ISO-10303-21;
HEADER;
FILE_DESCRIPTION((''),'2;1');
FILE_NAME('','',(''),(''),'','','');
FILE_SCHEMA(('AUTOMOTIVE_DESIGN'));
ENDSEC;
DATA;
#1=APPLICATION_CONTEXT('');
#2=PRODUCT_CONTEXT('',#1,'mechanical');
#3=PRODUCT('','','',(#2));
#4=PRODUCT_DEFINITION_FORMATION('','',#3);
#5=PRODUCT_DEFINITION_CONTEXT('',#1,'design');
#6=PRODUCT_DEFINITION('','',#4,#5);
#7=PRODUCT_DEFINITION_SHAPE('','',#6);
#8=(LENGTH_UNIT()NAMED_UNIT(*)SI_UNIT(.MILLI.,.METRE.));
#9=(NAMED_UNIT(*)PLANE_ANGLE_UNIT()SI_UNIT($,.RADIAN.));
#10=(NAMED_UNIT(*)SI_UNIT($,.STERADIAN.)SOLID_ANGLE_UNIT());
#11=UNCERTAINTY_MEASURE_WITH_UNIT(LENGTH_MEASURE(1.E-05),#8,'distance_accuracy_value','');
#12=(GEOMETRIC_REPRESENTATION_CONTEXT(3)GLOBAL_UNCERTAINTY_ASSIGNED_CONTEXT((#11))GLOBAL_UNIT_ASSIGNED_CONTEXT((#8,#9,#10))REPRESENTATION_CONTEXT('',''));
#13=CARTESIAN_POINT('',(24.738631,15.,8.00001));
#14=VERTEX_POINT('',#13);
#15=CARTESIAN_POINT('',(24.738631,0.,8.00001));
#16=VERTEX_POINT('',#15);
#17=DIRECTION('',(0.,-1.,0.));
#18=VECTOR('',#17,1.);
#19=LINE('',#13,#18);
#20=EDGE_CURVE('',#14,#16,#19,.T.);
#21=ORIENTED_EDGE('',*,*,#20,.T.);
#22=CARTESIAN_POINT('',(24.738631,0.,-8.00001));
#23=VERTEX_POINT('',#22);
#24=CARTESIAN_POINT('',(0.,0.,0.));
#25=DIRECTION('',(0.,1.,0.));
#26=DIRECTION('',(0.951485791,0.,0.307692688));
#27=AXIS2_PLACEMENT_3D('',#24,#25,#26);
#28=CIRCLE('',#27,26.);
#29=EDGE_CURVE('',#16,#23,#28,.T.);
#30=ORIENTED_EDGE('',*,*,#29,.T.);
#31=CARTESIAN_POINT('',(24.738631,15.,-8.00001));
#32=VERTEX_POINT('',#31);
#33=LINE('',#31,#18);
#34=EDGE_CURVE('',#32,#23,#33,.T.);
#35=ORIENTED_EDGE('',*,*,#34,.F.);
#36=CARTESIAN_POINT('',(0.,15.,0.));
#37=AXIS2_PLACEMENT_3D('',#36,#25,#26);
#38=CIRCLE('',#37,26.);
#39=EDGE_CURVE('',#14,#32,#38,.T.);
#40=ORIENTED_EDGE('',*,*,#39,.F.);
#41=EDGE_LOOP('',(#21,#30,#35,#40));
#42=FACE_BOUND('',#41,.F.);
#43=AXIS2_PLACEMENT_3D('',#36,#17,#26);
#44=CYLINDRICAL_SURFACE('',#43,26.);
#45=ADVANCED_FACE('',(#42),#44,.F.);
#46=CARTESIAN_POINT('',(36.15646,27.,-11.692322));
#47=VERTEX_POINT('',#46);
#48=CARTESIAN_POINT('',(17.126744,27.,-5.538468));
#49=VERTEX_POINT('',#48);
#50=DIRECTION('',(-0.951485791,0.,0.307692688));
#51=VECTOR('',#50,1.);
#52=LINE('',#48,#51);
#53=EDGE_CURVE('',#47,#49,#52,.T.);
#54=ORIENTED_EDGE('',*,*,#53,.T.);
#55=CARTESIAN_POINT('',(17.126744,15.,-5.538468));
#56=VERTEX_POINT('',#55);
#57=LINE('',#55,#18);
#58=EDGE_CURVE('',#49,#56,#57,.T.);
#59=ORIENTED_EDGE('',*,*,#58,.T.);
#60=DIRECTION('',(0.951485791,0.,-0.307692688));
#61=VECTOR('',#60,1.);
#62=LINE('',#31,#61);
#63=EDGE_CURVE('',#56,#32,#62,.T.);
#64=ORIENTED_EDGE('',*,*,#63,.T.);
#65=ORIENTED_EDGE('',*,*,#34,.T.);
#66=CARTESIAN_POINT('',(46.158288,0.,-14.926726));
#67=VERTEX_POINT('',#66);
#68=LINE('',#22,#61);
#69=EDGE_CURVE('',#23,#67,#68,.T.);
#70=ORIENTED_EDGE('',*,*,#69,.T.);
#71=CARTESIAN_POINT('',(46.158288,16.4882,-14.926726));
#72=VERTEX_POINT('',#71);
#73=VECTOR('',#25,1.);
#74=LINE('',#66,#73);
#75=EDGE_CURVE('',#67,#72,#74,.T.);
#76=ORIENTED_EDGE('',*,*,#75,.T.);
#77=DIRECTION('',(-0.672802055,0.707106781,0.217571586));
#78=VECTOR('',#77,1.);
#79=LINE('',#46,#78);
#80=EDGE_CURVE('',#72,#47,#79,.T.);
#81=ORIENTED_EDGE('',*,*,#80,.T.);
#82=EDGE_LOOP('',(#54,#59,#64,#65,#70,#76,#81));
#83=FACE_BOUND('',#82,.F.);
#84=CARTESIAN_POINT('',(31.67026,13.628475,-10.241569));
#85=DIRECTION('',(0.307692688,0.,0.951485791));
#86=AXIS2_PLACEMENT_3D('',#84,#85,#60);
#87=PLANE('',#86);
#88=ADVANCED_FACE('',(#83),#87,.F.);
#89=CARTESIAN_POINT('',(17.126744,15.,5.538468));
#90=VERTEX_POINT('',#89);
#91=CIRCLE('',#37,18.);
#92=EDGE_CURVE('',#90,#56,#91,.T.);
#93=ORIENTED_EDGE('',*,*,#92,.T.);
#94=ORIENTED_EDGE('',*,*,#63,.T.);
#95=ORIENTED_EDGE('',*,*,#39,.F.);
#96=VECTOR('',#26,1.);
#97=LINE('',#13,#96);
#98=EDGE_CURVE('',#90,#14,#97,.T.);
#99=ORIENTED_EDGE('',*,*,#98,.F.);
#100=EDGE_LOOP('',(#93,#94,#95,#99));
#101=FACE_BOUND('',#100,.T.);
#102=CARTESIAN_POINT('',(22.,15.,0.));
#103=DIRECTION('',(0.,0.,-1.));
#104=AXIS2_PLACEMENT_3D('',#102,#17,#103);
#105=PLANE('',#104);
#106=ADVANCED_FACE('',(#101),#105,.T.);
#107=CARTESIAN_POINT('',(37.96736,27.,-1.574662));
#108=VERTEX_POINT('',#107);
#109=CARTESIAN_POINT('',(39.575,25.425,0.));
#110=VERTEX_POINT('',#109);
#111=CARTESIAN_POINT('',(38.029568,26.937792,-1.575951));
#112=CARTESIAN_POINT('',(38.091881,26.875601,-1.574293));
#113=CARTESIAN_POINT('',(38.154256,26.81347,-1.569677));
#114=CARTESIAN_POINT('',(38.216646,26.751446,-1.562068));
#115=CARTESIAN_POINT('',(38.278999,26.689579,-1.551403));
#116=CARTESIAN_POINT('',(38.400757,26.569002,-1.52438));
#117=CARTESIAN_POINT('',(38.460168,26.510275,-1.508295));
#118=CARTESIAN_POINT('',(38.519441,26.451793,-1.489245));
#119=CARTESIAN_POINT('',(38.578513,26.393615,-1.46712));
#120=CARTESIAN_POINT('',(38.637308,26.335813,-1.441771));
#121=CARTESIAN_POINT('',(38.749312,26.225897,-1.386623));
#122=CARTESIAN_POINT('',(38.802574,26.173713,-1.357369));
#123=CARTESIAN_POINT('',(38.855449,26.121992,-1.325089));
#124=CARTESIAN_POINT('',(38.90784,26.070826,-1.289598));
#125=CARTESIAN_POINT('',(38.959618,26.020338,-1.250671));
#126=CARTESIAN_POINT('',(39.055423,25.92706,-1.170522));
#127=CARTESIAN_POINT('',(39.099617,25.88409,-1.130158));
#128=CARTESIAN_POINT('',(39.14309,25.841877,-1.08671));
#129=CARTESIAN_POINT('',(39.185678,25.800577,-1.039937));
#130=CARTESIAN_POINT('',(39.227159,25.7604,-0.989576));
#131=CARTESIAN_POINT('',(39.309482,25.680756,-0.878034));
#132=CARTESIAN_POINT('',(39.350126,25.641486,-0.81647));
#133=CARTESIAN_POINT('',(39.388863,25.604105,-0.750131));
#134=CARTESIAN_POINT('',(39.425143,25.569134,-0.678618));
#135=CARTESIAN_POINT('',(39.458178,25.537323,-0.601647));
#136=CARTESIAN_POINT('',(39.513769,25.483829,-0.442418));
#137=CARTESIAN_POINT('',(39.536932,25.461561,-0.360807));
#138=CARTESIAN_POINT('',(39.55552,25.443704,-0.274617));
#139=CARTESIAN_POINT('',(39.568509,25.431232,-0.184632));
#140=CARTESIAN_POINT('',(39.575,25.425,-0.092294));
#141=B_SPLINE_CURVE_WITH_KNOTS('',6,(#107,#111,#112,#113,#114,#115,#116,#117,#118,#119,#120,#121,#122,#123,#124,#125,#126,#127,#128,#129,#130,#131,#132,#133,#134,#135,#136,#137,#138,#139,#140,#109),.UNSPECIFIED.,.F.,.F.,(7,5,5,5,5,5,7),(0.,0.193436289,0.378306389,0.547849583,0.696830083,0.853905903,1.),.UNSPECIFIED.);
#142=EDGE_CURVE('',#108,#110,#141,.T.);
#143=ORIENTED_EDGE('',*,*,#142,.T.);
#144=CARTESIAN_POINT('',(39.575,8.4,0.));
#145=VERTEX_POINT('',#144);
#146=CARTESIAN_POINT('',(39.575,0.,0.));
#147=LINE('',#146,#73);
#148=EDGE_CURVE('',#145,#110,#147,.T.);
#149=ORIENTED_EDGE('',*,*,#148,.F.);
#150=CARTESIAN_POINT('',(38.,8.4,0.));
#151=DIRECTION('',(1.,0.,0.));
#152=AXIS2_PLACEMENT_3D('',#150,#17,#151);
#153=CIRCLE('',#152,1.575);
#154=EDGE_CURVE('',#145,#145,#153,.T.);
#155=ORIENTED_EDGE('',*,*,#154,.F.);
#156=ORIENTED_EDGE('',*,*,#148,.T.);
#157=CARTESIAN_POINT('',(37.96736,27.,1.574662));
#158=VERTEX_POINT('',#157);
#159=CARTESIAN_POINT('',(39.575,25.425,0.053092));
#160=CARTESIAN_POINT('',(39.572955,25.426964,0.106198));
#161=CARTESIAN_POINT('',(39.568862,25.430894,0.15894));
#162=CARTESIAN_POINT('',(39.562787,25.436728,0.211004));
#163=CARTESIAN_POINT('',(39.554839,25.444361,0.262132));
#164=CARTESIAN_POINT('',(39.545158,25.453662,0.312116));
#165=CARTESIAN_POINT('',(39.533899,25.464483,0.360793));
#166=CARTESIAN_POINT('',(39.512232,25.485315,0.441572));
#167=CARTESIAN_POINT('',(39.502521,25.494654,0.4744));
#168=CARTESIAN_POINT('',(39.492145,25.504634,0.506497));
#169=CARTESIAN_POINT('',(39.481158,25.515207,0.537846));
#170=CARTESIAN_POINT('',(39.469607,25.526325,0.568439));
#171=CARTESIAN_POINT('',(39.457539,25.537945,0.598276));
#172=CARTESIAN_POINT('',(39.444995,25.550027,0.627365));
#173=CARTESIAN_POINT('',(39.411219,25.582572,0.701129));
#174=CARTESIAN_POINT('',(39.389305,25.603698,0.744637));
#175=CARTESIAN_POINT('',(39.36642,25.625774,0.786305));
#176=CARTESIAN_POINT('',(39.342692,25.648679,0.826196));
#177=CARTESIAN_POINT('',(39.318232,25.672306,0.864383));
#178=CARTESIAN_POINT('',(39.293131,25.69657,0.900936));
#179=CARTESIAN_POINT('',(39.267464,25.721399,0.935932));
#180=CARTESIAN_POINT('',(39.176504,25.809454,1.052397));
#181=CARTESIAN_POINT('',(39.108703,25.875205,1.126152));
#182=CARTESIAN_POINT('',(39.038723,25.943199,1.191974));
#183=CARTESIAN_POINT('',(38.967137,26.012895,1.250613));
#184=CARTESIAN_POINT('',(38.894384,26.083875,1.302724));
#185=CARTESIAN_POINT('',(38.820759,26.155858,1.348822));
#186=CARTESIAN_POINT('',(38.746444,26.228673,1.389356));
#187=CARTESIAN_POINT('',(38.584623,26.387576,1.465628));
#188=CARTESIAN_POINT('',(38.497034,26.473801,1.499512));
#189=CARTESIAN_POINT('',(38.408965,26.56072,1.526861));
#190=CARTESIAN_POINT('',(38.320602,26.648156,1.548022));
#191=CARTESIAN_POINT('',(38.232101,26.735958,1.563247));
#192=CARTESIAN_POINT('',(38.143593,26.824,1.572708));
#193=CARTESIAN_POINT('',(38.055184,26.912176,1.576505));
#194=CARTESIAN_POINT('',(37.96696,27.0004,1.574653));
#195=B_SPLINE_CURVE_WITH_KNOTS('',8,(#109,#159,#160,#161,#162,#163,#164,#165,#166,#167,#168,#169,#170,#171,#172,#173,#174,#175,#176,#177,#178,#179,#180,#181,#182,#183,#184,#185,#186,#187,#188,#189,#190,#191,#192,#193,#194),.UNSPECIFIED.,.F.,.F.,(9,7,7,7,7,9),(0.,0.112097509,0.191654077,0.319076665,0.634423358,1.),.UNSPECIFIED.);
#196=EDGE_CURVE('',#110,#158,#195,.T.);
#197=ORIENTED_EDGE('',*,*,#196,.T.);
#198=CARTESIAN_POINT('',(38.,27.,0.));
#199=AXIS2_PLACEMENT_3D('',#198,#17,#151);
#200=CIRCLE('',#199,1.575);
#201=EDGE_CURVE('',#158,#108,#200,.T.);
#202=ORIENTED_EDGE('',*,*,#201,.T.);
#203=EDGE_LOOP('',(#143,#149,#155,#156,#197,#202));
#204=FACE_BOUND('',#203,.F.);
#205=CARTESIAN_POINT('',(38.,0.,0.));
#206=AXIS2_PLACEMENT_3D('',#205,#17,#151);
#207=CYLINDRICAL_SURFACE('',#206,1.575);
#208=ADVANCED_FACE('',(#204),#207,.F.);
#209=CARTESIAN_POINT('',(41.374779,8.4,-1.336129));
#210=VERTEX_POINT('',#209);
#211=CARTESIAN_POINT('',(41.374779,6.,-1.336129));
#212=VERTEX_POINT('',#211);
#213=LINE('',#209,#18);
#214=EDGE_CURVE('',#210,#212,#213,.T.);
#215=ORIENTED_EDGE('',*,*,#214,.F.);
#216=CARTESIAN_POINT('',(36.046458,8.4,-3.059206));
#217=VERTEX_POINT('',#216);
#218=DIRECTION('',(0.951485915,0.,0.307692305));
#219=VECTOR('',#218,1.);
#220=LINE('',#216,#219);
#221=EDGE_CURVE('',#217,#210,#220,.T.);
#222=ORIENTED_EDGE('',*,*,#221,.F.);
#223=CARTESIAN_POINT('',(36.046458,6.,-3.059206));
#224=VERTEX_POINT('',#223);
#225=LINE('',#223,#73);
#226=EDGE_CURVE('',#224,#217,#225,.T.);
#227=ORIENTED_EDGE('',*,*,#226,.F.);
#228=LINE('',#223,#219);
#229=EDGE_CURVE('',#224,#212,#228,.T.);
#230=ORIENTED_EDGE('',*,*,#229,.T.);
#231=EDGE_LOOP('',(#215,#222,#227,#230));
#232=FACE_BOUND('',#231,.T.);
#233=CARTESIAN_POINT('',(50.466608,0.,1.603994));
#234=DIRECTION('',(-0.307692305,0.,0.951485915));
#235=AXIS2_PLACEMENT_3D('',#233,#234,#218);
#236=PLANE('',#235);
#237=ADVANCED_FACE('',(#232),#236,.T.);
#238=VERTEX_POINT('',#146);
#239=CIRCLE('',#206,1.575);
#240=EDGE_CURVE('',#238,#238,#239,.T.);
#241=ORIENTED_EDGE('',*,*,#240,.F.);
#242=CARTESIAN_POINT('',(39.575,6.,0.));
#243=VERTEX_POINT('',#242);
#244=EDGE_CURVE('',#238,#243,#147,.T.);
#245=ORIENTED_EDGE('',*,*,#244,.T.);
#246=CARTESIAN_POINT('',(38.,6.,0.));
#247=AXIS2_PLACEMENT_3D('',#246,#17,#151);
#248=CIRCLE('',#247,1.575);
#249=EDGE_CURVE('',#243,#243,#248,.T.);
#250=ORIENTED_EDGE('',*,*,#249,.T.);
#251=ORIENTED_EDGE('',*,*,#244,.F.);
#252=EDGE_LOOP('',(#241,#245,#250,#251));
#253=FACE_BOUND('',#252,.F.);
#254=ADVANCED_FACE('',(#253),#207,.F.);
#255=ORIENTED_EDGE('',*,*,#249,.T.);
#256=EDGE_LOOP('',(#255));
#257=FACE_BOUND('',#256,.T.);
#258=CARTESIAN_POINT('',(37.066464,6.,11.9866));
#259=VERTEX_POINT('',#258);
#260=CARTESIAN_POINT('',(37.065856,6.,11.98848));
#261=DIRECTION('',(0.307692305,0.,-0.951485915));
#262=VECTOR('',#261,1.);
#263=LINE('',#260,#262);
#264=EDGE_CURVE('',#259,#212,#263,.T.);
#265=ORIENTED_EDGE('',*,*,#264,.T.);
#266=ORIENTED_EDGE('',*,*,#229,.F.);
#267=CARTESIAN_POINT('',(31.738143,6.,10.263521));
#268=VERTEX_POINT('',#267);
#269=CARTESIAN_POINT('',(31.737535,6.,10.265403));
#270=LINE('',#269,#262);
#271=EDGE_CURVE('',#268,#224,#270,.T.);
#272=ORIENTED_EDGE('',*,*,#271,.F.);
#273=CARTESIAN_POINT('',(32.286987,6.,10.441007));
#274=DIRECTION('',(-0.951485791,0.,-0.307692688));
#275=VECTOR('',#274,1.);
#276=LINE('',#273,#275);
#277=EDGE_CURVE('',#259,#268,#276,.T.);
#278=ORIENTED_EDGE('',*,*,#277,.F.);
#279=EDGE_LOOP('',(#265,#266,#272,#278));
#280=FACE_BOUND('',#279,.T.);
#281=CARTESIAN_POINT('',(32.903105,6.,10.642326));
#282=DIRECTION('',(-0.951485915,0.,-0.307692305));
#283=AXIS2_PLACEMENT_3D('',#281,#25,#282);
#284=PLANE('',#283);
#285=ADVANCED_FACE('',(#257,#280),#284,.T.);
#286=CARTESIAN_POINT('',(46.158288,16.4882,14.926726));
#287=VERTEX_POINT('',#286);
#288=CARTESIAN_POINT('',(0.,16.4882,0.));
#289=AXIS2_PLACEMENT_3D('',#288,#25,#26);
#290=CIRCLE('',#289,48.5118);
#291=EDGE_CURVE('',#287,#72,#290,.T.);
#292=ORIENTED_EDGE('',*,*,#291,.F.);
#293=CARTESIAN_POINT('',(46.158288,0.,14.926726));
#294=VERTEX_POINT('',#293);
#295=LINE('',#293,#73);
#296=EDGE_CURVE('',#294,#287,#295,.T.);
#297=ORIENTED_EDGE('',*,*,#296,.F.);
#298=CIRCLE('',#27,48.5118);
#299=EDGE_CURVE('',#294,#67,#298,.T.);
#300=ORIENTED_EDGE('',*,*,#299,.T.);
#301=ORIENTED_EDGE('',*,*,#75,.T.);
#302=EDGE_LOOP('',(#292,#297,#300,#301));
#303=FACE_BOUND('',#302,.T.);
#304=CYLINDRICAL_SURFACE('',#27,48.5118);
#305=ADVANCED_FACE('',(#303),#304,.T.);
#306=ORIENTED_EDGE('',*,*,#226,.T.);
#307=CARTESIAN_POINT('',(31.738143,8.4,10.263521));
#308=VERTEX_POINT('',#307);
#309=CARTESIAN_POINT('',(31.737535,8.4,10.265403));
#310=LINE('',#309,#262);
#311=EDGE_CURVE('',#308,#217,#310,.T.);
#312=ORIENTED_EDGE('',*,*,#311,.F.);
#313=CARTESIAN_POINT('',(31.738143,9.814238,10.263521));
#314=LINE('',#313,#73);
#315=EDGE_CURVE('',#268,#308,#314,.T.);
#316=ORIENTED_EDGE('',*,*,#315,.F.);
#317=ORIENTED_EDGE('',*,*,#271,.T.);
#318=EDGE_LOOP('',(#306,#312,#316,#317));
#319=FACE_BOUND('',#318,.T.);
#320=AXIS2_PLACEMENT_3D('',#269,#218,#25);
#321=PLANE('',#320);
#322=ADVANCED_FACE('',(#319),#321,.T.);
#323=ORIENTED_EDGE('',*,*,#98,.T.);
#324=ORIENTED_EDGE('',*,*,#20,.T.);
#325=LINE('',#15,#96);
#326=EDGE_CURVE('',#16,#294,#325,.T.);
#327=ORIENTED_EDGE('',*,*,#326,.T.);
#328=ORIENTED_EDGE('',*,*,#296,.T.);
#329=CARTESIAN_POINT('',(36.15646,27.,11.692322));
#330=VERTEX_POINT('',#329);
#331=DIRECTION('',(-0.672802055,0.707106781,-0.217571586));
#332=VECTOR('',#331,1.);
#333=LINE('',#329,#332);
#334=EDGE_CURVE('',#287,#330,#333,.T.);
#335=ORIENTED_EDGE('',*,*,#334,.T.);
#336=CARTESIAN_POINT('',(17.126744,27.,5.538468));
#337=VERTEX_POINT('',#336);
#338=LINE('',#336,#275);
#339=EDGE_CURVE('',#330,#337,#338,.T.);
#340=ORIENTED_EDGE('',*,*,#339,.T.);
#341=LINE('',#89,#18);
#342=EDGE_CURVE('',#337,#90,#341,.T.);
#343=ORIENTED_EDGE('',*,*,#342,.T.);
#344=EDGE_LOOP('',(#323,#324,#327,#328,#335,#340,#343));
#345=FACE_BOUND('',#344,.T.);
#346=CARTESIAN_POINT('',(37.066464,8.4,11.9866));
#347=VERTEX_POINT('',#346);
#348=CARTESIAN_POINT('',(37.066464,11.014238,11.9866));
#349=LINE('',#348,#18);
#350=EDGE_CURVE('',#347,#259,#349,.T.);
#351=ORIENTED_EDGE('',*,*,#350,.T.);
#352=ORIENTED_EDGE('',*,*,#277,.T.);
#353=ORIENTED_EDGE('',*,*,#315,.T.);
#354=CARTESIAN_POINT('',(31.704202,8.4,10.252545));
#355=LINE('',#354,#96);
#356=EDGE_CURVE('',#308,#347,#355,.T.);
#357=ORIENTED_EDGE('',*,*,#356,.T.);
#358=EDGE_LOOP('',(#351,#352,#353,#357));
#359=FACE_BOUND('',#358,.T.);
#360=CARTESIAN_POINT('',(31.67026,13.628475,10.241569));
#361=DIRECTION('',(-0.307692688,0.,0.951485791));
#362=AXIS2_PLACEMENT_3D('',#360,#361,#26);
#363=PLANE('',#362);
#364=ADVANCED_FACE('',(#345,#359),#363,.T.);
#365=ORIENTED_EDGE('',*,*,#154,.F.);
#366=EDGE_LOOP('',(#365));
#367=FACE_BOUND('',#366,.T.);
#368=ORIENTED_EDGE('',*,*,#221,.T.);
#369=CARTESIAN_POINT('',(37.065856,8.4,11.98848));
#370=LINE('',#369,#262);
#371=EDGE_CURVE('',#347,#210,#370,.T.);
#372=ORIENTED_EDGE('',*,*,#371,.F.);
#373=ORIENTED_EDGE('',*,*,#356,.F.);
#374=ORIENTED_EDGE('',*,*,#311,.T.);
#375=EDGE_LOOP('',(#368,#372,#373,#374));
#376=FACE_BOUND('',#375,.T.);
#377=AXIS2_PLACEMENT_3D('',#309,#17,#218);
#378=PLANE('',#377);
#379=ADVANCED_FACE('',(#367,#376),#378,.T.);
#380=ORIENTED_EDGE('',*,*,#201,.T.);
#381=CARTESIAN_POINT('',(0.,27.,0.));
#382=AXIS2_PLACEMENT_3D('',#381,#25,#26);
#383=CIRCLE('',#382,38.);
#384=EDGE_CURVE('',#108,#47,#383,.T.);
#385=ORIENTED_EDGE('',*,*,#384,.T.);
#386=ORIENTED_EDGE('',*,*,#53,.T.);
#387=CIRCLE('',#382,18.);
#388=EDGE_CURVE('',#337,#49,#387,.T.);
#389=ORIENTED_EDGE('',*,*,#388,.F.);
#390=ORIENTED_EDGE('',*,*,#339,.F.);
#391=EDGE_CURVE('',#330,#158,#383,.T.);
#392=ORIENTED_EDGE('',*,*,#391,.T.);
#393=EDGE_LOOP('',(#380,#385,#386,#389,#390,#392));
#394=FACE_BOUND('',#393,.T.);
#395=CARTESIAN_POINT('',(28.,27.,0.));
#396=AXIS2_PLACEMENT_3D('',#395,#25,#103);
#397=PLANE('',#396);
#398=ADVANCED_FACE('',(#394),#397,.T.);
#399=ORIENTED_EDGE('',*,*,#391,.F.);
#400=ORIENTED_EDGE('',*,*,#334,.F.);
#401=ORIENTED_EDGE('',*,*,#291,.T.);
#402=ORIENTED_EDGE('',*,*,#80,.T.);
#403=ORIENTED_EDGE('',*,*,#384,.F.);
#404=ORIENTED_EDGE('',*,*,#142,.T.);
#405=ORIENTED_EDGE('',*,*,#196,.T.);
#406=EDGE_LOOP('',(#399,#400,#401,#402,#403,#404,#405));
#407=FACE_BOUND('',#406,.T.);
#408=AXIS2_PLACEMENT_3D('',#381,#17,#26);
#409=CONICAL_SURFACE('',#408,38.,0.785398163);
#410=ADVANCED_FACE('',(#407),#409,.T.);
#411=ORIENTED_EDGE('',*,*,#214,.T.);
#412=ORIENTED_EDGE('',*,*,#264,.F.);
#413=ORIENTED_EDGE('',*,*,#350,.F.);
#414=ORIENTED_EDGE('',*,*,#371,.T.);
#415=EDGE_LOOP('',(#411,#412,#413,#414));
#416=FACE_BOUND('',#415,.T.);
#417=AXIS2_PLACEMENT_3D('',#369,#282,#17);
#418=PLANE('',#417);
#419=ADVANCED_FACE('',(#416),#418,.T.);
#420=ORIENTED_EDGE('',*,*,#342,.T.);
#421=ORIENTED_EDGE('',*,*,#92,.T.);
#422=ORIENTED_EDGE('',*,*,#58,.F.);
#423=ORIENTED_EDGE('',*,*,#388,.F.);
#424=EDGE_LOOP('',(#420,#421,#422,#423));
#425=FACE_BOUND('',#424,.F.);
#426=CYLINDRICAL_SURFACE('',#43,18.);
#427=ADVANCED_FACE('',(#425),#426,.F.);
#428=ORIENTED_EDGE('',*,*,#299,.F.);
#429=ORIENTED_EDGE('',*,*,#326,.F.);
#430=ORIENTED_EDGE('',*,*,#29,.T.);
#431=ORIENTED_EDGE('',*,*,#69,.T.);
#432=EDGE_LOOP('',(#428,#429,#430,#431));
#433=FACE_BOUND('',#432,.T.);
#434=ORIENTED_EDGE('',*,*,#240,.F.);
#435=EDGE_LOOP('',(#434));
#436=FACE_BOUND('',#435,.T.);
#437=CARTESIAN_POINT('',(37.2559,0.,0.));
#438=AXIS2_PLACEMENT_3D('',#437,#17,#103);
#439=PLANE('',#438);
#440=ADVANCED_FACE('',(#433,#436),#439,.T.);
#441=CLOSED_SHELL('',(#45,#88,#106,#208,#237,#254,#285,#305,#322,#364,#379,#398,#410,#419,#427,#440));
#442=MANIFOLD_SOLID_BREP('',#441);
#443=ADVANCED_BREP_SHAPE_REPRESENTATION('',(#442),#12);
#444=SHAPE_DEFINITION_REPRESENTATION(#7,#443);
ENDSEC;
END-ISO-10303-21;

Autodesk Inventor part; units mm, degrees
ref_plane "YZ Plane" through (0, 0, 0) normal (1, 0, 0) x (0, 1, 0)
ref_plane "XZ Plane" through (0, 0, 0) normal (0, 1, 0) x (-1, 0, 0)
ref_plane "XY Plane" through (0, 0, 0) normal (0, 0, 1) x (1, 0, 0)
sketch "Эскиз3" plane through (0, 0, 0) normal (0, 0, 1) x (1, 0, 0)
  line L0 (26, 0) -> (48.5118, 0)
  line L1 (48.5118, 0) -> (48.5118, 16.4882)
  line L2 (26, 15) -> (18, 15)
  line L3 (18, 15) -> (18, 27)
  line L4 (18, 27) -> (38, 27)
  line L5 (38, 27) -> (48.5118, 16.4882)
  line L6 (38, 27) -> (52.866, 27) construction
  line L7 (26, 15) -> (26, 0)
  dimension "d18" = 14.866
  dimension "d19" = 45
  dimension "d20" = 20
  dimension "d25" = 8
sketch "Эскиз4" plane through (0, 0, 0) normal (0, 1, 0) x (-1, 0, 0)
  arc A0 (-24.7386, 8) -> (-24.7386, -8) centre (0, 0) ccw
  dimension "d31" = 26
sweep "Сдвиг1" add profiles "Эскиз3" path "Эскиз4"
sketch "Эскиз5" plane through (0, 0, 0) normal (0, -1, 0) x (1, 0, 0)
  arc A0 (36.1565, 11.6923) -> (36.1565, -11.6923) centre (0, 0) ccw projected
  circle A1 centre (38, 0) radius 1.575
  point P0 (0, 0)
  dimension "d27" = 3.15
extrude "Выдавливание2" cut sketch "Эскиз5" against normal up to surface (27 mm away)
sketch "Эскиз7" plane through (46.1583, 0, 14.9267) normal (-0.3076923, 0, 0.9514859) x (0.9514859, 0, 0.3076923)
  line L0 (-13.9304, 0) -> (-13.9304, 27) projected
  line L1 (-10.7804, 0) -> (-10.7804, 25.4984) projected
  line L2 (-13.9304, 0) -> (-10.7804, 0)
  line L3 (-12.3554, 12.4) -> (-12.3554, 0) construction
  line L4 (-22.5118, 0) -> (0, 0) projected
  line L5 (-15.1554, 8.4) -> (-9.5554, 8.4)
  line L6 (-9.5554, 8.4) -> (-9.5554, 6)
  line L7 (-9.5554, 6) -> (-15.1554, 6)
  line L8 (-15.1554, 6) -> (-15.1554, 8.4)
  line L9 (-9.5554, 6) -> (-15.1554, 8.4) construction
  point P0 (-48.5118, 0)
  point P1 (-12.3554, 7.2)
  dimension "d35" = 5.6
  dimension "d36" = 2.4
  dimension "d37" = 1.575
  dimension "d38" = 6
extrude "Выдавливание3" cut sketch "Эскиз7" against normal blind 14 contours L7 L8 L5 L0 | L0 L5 L1 L7 | L1 L5 L6 L7
